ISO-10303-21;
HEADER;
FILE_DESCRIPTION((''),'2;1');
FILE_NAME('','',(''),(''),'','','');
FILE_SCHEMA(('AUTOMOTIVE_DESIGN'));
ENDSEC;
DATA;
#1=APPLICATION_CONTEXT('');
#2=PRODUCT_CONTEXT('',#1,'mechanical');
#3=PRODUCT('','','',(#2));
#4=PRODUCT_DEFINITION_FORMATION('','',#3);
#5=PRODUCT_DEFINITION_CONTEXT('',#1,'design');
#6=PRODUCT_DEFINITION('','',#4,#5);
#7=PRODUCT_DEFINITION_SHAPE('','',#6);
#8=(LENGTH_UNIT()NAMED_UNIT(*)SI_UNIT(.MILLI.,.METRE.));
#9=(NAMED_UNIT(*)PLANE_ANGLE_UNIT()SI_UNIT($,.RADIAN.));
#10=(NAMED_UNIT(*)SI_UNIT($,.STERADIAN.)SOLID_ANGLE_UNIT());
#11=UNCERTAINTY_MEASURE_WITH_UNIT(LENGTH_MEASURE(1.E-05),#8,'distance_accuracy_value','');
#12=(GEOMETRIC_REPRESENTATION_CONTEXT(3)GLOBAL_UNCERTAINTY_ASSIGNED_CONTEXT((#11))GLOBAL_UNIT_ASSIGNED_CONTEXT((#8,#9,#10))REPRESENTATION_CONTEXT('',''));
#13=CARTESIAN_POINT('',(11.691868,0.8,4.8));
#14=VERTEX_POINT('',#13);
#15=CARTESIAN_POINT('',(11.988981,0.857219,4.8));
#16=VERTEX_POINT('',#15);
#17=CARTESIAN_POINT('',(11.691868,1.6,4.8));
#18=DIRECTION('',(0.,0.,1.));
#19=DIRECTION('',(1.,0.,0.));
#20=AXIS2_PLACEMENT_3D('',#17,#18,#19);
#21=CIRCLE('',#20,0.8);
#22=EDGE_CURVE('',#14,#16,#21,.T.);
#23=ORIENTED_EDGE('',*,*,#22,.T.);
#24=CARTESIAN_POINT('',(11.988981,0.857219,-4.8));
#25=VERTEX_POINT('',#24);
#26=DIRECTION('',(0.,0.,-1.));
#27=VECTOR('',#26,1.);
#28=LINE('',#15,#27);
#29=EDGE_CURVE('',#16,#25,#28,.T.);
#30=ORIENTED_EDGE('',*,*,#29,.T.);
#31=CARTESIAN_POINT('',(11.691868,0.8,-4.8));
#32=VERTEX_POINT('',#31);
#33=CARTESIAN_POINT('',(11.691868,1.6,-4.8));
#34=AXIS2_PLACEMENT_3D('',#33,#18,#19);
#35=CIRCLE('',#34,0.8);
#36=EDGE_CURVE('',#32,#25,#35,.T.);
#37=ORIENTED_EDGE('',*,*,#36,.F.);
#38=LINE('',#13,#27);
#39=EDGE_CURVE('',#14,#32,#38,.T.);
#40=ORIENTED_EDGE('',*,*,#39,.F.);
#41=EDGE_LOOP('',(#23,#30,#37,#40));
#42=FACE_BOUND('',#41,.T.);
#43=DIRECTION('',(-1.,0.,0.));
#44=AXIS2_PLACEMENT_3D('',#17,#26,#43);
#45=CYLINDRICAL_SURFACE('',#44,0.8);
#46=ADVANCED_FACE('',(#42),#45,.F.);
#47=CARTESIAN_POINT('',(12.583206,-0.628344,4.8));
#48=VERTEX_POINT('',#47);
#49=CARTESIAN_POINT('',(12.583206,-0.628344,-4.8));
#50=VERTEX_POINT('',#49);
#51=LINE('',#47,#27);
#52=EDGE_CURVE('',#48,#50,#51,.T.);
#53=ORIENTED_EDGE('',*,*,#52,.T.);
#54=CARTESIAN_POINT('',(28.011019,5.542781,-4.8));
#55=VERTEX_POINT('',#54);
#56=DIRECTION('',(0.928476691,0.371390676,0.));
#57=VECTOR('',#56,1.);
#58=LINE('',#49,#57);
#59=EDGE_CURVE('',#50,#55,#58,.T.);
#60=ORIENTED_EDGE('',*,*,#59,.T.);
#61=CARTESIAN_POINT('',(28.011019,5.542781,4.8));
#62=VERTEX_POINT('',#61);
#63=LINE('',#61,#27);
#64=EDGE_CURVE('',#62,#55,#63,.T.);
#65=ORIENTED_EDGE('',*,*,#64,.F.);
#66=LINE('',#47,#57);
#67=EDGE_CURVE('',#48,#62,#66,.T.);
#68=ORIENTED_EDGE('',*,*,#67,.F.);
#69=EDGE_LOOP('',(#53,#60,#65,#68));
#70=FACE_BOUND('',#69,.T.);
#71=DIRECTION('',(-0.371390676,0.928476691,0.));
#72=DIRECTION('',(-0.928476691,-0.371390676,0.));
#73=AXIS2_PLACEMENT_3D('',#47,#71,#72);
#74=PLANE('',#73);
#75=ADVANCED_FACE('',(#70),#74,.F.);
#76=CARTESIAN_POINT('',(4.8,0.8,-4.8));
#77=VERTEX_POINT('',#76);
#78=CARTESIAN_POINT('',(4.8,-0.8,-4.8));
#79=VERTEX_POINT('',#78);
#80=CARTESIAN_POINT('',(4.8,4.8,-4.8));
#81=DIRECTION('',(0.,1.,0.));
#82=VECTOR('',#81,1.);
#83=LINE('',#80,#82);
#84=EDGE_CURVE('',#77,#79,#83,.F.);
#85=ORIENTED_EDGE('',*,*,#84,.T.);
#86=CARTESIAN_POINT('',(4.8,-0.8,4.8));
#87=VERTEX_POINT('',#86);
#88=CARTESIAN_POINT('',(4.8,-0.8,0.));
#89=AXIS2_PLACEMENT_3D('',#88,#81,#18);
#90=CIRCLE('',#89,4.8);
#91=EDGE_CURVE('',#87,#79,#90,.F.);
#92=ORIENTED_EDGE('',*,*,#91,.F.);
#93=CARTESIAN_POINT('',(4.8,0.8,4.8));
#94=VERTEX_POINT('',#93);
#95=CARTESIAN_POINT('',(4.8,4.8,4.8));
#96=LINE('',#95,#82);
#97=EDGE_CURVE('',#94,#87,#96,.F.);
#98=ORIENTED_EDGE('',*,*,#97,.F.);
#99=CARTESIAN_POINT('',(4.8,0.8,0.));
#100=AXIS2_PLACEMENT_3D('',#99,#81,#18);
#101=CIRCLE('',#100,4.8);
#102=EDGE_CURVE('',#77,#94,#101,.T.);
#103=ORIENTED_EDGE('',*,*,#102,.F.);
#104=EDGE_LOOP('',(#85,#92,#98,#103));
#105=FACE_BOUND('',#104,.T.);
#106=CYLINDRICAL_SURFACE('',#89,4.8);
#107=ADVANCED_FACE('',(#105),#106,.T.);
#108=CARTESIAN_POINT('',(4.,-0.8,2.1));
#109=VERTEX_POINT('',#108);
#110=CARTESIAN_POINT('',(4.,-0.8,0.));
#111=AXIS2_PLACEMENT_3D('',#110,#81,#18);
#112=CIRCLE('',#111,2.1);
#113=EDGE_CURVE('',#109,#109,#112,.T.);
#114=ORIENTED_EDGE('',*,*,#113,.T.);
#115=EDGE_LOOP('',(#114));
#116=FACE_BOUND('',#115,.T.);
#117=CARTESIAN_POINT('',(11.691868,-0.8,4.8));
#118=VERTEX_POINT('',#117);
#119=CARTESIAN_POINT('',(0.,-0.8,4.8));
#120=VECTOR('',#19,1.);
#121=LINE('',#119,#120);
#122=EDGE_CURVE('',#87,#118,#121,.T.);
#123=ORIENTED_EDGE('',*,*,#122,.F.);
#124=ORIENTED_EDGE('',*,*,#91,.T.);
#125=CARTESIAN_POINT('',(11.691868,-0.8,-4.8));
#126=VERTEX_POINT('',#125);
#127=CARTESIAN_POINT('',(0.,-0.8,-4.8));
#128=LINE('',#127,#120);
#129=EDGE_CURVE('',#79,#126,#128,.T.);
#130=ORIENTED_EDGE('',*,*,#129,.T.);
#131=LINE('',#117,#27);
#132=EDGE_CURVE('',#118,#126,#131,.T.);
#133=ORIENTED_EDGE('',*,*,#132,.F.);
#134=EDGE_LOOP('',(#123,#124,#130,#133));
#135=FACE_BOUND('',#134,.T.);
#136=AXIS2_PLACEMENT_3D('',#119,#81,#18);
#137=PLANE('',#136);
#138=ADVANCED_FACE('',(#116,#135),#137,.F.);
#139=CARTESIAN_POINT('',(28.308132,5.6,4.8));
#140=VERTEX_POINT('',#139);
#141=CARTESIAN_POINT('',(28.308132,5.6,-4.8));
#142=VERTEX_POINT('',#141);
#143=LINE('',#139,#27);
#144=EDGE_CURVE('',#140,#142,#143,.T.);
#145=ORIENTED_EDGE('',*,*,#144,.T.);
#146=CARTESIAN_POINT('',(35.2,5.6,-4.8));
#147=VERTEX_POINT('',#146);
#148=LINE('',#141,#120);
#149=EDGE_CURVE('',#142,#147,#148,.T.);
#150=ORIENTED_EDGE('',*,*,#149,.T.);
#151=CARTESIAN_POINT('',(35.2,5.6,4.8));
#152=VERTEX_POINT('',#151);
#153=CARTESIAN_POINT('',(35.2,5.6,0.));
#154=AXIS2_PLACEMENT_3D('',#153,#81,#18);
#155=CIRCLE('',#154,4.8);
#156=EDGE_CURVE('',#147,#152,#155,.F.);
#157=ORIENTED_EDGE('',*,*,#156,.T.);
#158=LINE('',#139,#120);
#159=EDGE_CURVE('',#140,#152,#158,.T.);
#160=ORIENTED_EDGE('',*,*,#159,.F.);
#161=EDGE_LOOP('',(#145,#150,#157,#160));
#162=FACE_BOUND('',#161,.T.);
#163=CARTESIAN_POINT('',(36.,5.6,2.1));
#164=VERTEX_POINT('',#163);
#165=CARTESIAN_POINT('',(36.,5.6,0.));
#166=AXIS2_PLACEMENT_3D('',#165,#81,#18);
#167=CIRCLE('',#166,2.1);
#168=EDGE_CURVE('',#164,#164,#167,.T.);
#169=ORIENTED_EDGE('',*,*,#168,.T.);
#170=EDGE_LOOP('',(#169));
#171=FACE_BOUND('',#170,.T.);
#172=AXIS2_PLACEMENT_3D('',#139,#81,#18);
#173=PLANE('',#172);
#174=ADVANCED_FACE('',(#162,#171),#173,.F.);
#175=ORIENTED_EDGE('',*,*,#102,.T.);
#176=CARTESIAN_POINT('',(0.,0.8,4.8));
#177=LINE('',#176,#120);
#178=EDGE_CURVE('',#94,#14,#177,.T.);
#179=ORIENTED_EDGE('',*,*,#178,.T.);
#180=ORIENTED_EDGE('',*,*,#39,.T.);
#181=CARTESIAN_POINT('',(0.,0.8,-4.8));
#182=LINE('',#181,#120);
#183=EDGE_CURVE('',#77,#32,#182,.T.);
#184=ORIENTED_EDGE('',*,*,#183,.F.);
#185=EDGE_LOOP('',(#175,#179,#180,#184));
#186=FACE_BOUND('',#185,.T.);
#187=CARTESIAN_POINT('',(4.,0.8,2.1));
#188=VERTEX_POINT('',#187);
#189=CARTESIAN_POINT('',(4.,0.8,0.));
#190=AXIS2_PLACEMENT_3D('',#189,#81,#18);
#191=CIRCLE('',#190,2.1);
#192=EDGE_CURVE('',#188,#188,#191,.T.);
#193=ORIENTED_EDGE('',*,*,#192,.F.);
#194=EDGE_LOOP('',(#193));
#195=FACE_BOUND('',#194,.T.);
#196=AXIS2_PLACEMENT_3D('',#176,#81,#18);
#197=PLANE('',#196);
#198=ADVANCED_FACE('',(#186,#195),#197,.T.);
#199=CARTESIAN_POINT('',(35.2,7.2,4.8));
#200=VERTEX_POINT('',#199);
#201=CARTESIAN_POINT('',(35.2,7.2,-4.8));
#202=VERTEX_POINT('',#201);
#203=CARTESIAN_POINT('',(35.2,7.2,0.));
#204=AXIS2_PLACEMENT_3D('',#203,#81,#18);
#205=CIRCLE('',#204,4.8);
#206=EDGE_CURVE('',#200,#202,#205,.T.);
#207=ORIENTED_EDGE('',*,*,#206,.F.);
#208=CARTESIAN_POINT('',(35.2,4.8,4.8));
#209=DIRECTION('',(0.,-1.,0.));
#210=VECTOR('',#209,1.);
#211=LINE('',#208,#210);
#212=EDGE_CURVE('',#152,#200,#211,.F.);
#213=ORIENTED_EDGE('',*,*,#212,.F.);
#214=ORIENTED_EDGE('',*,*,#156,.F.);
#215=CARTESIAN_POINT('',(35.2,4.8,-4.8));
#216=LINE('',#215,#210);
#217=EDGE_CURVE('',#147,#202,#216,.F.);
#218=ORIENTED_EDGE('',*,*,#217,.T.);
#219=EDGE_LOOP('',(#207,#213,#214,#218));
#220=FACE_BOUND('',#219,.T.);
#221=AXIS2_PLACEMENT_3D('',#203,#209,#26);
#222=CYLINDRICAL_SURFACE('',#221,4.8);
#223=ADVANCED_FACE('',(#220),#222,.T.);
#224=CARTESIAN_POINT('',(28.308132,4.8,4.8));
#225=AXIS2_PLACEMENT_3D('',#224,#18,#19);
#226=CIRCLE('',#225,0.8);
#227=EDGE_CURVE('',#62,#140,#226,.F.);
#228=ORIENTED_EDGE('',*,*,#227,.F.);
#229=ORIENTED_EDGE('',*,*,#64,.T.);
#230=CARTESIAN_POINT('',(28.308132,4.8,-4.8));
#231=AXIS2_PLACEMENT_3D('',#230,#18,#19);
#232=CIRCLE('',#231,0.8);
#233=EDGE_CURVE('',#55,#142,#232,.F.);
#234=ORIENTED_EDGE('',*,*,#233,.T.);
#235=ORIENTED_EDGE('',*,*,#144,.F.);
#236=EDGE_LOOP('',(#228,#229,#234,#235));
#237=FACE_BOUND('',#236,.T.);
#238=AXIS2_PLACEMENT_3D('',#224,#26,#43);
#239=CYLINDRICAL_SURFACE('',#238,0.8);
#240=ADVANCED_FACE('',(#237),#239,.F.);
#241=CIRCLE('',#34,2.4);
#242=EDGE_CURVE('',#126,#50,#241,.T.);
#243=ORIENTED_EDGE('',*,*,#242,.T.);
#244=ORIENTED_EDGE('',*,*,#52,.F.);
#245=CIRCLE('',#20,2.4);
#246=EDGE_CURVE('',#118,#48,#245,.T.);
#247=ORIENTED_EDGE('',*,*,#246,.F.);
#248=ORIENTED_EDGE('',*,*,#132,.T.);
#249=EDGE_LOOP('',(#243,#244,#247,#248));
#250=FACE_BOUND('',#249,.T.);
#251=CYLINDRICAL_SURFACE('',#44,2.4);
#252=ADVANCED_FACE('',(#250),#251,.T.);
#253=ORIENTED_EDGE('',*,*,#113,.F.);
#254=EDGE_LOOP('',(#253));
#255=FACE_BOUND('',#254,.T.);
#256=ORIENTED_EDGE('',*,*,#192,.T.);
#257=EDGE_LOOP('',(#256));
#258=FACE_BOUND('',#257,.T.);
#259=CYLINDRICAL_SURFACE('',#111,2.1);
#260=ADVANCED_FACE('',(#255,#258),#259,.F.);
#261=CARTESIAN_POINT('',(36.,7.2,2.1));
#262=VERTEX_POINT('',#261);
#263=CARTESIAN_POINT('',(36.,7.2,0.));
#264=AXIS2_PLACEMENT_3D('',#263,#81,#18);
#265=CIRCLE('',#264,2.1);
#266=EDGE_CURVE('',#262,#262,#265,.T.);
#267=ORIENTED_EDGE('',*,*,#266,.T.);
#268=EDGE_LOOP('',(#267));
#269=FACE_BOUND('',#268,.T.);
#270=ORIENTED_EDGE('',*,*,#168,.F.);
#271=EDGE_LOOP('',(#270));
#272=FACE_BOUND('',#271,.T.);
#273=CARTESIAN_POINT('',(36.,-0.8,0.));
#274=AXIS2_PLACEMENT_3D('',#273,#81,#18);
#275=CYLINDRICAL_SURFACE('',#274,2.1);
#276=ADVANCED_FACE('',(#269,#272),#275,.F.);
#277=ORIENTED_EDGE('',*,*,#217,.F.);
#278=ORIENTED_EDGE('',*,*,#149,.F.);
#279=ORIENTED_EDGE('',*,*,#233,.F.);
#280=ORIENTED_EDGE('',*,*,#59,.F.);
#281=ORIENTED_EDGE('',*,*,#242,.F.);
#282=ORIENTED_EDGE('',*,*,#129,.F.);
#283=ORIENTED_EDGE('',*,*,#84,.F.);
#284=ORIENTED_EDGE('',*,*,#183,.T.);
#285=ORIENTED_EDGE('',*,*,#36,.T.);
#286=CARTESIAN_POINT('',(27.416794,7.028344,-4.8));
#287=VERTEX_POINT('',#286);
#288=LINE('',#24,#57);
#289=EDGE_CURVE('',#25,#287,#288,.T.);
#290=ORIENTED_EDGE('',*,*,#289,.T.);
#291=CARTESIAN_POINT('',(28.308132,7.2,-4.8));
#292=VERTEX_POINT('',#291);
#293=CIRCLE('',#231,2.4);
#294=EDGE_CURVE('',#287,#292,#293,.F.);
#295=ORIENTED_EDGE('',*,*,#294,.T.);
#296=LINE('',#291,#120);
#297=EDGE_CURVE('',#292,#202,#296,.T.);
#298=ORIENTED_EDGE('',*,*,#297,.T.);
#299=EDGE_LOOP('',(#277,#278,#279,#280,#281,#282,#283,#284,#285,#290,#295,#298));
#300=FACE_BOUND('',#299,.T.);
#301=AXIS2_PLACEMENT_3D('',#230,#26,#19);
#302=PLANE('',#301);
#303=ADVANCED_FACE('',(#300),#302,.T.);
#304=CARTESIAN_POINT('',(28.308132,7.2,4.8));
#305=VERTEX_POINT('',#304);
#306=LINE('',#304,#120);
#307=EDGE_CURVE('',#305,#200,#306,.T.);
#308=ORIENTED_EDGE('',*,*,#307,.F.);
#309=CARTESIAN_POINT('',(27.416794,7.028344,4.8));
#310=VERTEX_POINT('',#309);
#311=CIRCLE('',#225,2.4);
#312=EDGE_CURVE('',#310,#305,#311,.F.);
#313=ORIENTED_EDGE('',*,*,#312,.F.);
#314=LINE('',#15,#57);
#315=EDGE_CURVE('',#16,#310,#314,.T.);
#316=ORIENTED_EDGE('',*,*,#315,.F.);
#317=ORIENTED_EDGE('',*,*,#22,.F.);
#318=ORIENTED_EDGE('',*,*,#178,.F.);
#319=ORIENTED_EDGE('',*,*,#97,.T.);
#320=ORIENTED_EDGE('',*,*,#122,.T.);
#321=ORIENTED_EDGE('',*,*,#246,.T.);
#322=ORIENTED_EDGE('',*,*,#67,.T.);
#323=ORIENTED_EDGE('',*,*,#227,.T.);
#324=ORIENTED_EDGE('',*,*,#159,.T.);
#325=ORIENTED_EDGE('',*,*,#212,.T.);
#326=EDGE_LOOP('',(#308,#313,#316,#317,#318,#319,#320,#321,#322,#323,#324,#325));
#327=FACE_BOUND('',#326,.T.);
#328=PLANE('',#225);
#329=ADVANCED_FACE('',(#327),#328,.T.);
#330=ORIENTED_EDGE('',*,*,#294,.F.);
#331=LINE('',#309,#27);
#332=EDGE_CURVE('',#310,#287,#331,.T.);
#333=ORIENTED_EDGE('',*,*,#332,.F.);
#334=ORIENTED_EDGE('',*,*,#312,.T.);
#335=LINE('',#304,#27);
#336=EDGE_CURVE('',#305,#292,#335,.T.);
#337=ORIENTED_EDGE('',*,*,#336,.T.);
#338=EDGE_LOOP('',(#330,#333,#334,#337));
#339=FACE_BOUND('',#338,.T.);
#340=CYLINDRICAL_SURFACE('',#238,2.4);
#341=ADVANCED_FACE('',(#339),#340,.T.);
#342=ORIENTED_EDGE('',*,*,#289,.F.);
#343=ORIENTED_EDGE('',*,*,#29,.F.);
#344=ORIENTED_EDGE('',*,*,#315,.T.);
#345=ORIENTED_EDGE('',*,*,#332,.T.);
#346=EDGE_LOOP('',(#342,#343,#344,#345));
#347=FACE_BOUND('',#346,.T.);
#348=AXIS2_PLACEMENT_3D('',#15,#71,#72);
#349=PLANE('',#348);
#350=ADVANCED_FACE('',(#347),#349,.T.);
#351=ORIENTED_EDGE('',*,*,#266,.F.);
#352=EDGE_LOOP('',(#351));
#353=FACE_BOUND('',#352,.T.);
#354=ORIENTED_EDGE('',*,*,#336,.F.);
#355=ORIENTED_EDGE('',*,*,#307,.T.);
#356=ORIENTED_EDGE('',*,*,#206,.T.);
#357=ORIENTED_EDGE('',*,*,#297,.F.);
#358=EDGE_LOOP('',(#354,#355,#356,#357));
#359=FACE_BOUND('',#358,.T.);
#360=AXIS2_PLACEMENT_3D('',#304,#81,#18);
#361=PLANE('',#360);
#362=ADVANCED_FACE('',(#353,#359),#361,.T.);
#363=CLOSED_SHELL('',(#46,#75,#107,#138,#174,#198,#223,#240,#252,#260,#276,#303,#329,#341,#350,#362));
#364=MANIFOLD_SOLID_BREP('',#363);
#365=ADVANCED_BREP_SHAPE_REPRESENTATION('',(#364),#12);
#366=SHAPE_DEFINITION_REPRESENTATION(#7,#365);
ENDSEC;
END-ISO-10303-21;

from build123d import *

# Parameters (mm, degrees)
EXTRUDE_THIN1_DEPTH = 4.8
SKETCH2_R           = 2.1
CUT_EXTRUDE1_DEPTH  = 41.792156109
SKETCH3_R           = 2.1
CUT_EXTRUDE2_DEPTH  = 42.07359249
FILLET1_R           = 4.8


with BuildPart() as part:
    # Sketch1 → Extrude-Thin1 (new body)
    with BuildSketch(Plane.XY):
        with BuildLine():
            Line((0, -0.8), (11.691868154, -0.8))
            ThreePointArc((11.691868154, -0.8), (12.145726205, -0.756695328), (12.583205778, -0.628344058))
            Line((12.583205778, -0.628344058), (28.011019305, 5.542781353))
            ThreePointArc((28.011019305, 5.542781353), (28.156845829, 5.585565109), (28.308131846, 5.6))
            Line((28.308131846, 5.6), (40, 5.6))
            Line((40, 5.6), (40, 7.2))
            Line((40, 7.2), (28.308131846, 7.2))
            ThreePointArc((28.308131846, 7.2), (27.854273795, 7.156695328), (27.416794222, 7.028344058))
            Line((27.416794222, 7.028344058), (11.988980695, 0.857218647))
            ThreePointArc((11.988980695, 0.857218647), (11.843154171, 0.814434891), (11.691868154, 0.8))
            Line((11.691868154, 0.8), (0, 0.8))
            Line((0, 0.8), (0, -0.8))
        make_face()
    extrude(amount=EXTRUDE_THIN1_DEPTH)

    # Sketch2 → Cut-Extrude1 (cut, through all)
    with BuildSketch(Plane(origin=(0, 0.8, 0), x_dir=(1, 0, 0), z_dir=(0, 1, 0))):
        with Locations((4, 0)):
            Circle(SKETCH2_R)
    extrude(amount=-CUT_EXTRUDE1_DEPTH, mode=Mode.SUBTRACT)

    # Sketch3 → Cut-Extrude2 (cut, through all)
    with BuildSketch(Plane(origin=(0, 7.2, 0), x_dir=(1, 0, 0), z_dir=(0, 1, 0))):
        with Locations((36, 0)):
            Circle(SKETCH3_R)
    extrude(amount=-CUT_EXTRUDE2_DEPTH, mode=Mode.SUBTRACT)

    # Fillet1
    fillet1_edges = [part.edges().sort_by_distance(p)[0] for p in [
        (0, 0, 4.8),
        (40, 6.4, 4.8),
    ]]
    fillet(fillet1_edges, radius=FILLET1_R - 0.0001)  # a hair under: the kernel refuses the full size

    # Mirror1: part across plane


with BuildPart() as part_1:
    add(part.part)
    add(part.part.mirror(Plane(origin=(28.308131846, 4.8, 0), x_dir=(1, 0, 0), z_dir=(0, 0, 1))))


solid = part_1.part
